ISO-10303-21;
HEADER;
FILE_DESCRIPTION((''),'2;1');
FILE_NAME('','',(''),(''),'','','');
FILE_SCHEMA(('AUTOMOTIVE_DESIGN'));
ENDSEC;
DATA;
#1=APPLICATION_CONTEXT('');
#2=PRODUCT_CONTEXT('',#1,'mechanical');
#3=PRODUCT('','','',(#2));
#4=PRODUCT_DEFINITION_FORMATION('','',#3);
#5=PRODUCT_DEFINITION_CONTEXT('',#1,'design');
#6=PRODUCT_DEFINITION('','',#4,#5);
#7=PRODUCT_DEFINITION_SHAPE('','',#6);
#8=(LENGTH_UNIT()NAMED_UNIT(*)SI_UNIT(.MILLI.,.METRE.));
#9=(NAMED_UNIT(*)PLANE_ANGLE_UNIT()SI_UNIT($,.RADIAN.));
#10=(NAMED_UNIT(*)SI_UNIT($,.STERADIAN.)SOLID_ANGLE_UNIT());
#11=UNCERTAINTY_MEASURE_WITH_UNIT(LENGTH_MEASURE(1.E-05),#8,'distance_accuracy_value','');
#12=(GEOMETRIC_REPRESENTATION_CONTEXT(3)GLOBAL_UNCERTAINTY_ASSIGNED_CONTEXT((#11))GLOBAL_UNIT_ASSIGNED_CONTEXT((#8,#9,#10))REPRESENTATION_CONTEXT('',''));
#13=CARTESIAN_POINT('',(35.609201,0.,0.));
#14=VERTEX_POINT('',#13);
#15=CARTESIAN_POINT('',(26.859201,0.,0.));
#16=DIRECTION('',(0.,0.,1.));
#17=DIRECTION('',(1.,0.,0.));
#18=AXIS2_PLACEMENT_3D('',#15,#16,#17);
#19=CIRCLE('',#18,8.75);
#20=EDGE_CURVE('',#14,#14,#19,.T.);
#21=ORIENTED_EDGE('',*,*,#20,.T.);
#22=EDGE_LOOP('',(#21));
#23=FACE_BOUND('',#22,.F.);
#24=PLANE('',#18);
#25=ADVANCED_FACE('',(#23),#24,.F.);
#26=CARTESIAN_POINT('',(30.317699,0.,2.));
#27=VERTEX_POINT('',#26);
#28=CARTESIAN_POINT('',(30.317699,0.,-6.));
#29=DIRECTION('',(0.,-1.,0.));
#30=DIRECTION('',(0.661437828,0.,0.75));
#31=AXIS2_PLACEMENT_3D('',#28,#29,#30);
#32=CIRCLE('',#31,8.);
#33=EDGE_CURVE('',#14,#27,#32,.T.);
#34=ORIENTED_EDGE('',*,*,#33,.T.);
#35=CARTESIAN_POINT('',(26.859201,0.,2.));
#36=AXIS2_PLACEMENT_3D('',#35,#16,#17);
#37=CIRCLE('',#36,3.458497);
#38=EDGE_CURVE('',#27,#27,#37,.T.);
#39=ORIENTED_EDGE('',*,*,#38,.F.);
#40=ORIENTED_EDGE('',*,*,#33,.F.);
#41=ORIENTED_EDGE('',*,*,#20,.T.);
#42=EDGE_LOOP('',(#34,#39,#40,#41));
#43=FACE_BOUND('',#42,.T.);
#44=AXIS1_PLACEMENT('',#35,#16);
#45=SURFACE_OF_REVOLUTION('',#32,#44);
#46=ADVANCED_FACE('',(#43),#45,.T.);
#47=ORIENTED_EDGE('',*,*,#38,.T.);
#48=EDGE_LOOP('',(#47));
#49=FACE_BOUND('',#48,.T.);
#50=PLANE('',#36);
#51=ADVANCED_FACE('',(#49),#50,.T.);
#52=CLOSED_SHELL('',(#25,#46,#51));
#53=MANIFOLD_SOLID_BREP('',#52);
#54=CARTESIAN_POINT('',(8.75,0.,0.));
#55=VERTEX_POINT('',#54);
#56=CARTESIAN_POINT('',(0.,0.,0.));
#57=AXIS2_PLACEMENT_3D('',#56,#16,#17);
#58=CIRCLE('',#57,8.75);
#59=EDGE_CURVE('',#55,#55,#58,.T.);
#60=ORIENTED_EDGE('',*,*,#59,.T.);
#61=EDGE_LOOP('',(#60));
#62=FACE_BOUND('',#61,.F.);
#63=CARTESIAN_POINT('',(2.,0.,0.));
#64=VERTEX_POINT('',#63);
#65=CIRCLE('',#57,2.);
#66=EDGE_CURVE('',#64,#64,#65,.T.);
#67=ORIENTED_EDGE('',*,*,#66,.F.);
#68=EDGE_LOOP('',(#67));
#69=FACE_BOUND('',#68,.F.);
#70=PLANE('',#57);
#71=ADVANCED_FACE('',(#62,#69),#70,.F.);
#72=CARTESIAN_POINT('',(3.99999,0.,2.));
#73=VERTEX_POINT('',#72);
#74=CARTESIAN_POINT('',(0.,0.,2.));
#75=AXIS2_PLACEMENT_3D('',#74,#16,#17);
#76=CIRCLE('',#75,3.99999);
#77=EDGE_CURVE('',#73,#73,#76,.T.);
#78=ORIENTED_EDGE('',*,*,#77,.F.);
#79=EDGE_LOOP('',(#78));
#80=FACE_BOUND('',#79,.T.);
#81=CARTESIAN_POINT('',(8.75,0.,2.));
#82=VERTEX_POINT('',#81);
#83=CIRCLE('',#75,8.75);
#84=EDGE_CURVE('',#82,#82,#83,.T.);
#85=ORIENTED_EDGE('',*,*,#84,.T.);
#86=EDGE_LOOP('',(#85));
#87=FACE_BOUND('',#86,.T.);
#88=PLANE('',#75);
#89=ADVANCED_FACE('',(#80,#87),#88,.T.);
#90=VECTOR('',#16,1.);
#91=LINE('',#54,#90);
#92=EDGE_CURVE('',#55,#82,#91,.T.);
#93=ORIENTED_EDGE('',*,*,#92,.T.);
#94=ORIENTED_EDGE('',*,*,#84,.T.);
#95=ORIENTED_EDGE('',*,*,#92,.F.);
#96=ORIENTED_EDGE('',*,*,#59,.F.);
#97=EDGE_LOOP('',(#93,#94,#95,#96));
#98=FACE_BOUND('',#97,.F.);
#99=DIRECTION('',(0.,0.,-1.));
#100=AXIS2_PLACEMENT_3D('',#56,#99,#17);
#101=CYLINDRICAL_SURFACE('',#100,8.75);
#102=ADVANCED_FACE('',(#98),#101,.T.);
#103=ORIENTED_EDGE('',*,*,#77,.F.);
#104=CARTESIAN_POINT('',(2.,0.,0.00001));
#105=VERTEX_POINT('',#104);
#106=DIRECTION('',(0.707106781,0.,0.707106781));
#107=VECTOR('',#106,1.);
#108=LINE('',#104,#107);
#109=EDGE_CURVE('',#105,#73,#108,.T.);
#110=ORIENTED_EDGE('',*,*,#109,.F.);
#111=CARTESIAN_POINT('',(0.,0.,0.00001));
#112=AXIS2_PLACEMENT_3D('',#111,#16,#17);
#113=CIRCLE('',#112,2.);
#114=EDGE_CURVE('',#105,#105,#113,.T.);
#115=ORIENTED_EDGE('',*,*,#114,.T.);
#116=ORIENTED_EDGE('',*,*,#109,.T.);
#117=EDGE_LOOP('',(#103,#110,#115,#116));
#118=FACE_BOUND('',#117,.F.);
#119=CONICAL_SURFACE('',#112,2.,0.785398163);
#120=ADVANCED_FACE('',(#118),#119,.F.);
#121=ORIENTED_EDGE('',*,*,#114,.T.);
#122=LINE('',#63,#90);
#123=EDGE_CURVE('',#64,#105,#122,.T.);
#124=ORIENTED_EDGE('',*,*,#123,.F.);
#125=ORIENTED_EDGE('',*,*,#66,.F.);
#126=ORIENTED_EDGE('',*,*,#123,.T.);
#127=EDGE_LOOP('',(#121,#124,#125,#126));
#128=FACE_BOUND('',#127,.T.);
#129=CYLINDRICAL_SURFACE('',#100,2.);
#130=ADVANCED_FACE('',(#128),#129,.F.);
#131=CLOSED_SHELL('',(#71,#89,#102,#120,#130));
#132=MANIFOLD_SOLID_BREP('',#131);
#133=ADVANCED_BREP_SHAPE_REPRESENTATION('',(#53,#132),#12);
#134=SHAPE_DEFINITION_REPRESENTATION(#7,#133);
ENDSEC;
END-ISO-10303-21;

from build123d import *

# Parameters (mm, degrees)
F0_R     = 8.75
F0_R_2   = 2
F1_DEPTH = 2
F2_SIZE  = 1.99999
F3_DEPTH = 2


# Not quite as in the source:
# - a fillet or chamfer that OpenCascade refuses, or shapes differently, is made with other operations: its cross-section is extruded or revolved along the edge and cut away or added
# - a fillet or chamfer is up to 0.001 mm smaller than in the source, because OpenCascade refuses the exact size


with BuildPart() as f1:
    # F0 (on Top) → F1 (new body)
    with BuildSketch(Plane.XY):
        Circle(F0_R)
        Circle(F0_R_2, mode=Mode.SUBTRACT)
    extrude(amount=F1_DEPTH)

    # F2 (size 2 in the source; OpenCascade refuses exactly that, so slightly less here)
    f2_edges = [f1.edges().sort_by_distance(p)[0] for p in [
        (-2, 0, 2),
    ]]
    chamfer(f2_edges, length=F2_SIZE)


with BuildPart() as f3:
    # F0 (on Top) → F3 (new body)
    with BuildSketch(Plane.XY):
        with Locations((26.8592014909, 0)):
            Circle(F0_R)
    extrude(amount=F3_DEPTH)

    # F4: fillet of radius 8 on 1 edges, made by hand

    # F4_s1 → F4_t2 (revolve, cut)
    with BuildSketch(Plane.XZ):
        with BuildLine():
            ThreePointArc((35.6092014909, 0), (33.1461259935, 1.4833147735), (30.3176988687, 2))
            Line((30.3176988687, 2), (30.3176988687, 2.16))
            Line((30.3176988687, 2.16), (35.6092014909, 2.16))
            Line((35.6092014909, 2.16), (35.7692014909, 2))
            ThreePointArc((35.7692014909, 2), (35.7692014909, 1), (35.7150315433, 0.12))
            Line((35.7150315433, 0.12), (35.6092014909, 0))
        make_face()
    revolve(axis=Axis((26.8592014909, 0, 2), (0, 0, 1)), mode=Mode.SUBTRACT)


solid = Compound([f1.part, f3.part])
